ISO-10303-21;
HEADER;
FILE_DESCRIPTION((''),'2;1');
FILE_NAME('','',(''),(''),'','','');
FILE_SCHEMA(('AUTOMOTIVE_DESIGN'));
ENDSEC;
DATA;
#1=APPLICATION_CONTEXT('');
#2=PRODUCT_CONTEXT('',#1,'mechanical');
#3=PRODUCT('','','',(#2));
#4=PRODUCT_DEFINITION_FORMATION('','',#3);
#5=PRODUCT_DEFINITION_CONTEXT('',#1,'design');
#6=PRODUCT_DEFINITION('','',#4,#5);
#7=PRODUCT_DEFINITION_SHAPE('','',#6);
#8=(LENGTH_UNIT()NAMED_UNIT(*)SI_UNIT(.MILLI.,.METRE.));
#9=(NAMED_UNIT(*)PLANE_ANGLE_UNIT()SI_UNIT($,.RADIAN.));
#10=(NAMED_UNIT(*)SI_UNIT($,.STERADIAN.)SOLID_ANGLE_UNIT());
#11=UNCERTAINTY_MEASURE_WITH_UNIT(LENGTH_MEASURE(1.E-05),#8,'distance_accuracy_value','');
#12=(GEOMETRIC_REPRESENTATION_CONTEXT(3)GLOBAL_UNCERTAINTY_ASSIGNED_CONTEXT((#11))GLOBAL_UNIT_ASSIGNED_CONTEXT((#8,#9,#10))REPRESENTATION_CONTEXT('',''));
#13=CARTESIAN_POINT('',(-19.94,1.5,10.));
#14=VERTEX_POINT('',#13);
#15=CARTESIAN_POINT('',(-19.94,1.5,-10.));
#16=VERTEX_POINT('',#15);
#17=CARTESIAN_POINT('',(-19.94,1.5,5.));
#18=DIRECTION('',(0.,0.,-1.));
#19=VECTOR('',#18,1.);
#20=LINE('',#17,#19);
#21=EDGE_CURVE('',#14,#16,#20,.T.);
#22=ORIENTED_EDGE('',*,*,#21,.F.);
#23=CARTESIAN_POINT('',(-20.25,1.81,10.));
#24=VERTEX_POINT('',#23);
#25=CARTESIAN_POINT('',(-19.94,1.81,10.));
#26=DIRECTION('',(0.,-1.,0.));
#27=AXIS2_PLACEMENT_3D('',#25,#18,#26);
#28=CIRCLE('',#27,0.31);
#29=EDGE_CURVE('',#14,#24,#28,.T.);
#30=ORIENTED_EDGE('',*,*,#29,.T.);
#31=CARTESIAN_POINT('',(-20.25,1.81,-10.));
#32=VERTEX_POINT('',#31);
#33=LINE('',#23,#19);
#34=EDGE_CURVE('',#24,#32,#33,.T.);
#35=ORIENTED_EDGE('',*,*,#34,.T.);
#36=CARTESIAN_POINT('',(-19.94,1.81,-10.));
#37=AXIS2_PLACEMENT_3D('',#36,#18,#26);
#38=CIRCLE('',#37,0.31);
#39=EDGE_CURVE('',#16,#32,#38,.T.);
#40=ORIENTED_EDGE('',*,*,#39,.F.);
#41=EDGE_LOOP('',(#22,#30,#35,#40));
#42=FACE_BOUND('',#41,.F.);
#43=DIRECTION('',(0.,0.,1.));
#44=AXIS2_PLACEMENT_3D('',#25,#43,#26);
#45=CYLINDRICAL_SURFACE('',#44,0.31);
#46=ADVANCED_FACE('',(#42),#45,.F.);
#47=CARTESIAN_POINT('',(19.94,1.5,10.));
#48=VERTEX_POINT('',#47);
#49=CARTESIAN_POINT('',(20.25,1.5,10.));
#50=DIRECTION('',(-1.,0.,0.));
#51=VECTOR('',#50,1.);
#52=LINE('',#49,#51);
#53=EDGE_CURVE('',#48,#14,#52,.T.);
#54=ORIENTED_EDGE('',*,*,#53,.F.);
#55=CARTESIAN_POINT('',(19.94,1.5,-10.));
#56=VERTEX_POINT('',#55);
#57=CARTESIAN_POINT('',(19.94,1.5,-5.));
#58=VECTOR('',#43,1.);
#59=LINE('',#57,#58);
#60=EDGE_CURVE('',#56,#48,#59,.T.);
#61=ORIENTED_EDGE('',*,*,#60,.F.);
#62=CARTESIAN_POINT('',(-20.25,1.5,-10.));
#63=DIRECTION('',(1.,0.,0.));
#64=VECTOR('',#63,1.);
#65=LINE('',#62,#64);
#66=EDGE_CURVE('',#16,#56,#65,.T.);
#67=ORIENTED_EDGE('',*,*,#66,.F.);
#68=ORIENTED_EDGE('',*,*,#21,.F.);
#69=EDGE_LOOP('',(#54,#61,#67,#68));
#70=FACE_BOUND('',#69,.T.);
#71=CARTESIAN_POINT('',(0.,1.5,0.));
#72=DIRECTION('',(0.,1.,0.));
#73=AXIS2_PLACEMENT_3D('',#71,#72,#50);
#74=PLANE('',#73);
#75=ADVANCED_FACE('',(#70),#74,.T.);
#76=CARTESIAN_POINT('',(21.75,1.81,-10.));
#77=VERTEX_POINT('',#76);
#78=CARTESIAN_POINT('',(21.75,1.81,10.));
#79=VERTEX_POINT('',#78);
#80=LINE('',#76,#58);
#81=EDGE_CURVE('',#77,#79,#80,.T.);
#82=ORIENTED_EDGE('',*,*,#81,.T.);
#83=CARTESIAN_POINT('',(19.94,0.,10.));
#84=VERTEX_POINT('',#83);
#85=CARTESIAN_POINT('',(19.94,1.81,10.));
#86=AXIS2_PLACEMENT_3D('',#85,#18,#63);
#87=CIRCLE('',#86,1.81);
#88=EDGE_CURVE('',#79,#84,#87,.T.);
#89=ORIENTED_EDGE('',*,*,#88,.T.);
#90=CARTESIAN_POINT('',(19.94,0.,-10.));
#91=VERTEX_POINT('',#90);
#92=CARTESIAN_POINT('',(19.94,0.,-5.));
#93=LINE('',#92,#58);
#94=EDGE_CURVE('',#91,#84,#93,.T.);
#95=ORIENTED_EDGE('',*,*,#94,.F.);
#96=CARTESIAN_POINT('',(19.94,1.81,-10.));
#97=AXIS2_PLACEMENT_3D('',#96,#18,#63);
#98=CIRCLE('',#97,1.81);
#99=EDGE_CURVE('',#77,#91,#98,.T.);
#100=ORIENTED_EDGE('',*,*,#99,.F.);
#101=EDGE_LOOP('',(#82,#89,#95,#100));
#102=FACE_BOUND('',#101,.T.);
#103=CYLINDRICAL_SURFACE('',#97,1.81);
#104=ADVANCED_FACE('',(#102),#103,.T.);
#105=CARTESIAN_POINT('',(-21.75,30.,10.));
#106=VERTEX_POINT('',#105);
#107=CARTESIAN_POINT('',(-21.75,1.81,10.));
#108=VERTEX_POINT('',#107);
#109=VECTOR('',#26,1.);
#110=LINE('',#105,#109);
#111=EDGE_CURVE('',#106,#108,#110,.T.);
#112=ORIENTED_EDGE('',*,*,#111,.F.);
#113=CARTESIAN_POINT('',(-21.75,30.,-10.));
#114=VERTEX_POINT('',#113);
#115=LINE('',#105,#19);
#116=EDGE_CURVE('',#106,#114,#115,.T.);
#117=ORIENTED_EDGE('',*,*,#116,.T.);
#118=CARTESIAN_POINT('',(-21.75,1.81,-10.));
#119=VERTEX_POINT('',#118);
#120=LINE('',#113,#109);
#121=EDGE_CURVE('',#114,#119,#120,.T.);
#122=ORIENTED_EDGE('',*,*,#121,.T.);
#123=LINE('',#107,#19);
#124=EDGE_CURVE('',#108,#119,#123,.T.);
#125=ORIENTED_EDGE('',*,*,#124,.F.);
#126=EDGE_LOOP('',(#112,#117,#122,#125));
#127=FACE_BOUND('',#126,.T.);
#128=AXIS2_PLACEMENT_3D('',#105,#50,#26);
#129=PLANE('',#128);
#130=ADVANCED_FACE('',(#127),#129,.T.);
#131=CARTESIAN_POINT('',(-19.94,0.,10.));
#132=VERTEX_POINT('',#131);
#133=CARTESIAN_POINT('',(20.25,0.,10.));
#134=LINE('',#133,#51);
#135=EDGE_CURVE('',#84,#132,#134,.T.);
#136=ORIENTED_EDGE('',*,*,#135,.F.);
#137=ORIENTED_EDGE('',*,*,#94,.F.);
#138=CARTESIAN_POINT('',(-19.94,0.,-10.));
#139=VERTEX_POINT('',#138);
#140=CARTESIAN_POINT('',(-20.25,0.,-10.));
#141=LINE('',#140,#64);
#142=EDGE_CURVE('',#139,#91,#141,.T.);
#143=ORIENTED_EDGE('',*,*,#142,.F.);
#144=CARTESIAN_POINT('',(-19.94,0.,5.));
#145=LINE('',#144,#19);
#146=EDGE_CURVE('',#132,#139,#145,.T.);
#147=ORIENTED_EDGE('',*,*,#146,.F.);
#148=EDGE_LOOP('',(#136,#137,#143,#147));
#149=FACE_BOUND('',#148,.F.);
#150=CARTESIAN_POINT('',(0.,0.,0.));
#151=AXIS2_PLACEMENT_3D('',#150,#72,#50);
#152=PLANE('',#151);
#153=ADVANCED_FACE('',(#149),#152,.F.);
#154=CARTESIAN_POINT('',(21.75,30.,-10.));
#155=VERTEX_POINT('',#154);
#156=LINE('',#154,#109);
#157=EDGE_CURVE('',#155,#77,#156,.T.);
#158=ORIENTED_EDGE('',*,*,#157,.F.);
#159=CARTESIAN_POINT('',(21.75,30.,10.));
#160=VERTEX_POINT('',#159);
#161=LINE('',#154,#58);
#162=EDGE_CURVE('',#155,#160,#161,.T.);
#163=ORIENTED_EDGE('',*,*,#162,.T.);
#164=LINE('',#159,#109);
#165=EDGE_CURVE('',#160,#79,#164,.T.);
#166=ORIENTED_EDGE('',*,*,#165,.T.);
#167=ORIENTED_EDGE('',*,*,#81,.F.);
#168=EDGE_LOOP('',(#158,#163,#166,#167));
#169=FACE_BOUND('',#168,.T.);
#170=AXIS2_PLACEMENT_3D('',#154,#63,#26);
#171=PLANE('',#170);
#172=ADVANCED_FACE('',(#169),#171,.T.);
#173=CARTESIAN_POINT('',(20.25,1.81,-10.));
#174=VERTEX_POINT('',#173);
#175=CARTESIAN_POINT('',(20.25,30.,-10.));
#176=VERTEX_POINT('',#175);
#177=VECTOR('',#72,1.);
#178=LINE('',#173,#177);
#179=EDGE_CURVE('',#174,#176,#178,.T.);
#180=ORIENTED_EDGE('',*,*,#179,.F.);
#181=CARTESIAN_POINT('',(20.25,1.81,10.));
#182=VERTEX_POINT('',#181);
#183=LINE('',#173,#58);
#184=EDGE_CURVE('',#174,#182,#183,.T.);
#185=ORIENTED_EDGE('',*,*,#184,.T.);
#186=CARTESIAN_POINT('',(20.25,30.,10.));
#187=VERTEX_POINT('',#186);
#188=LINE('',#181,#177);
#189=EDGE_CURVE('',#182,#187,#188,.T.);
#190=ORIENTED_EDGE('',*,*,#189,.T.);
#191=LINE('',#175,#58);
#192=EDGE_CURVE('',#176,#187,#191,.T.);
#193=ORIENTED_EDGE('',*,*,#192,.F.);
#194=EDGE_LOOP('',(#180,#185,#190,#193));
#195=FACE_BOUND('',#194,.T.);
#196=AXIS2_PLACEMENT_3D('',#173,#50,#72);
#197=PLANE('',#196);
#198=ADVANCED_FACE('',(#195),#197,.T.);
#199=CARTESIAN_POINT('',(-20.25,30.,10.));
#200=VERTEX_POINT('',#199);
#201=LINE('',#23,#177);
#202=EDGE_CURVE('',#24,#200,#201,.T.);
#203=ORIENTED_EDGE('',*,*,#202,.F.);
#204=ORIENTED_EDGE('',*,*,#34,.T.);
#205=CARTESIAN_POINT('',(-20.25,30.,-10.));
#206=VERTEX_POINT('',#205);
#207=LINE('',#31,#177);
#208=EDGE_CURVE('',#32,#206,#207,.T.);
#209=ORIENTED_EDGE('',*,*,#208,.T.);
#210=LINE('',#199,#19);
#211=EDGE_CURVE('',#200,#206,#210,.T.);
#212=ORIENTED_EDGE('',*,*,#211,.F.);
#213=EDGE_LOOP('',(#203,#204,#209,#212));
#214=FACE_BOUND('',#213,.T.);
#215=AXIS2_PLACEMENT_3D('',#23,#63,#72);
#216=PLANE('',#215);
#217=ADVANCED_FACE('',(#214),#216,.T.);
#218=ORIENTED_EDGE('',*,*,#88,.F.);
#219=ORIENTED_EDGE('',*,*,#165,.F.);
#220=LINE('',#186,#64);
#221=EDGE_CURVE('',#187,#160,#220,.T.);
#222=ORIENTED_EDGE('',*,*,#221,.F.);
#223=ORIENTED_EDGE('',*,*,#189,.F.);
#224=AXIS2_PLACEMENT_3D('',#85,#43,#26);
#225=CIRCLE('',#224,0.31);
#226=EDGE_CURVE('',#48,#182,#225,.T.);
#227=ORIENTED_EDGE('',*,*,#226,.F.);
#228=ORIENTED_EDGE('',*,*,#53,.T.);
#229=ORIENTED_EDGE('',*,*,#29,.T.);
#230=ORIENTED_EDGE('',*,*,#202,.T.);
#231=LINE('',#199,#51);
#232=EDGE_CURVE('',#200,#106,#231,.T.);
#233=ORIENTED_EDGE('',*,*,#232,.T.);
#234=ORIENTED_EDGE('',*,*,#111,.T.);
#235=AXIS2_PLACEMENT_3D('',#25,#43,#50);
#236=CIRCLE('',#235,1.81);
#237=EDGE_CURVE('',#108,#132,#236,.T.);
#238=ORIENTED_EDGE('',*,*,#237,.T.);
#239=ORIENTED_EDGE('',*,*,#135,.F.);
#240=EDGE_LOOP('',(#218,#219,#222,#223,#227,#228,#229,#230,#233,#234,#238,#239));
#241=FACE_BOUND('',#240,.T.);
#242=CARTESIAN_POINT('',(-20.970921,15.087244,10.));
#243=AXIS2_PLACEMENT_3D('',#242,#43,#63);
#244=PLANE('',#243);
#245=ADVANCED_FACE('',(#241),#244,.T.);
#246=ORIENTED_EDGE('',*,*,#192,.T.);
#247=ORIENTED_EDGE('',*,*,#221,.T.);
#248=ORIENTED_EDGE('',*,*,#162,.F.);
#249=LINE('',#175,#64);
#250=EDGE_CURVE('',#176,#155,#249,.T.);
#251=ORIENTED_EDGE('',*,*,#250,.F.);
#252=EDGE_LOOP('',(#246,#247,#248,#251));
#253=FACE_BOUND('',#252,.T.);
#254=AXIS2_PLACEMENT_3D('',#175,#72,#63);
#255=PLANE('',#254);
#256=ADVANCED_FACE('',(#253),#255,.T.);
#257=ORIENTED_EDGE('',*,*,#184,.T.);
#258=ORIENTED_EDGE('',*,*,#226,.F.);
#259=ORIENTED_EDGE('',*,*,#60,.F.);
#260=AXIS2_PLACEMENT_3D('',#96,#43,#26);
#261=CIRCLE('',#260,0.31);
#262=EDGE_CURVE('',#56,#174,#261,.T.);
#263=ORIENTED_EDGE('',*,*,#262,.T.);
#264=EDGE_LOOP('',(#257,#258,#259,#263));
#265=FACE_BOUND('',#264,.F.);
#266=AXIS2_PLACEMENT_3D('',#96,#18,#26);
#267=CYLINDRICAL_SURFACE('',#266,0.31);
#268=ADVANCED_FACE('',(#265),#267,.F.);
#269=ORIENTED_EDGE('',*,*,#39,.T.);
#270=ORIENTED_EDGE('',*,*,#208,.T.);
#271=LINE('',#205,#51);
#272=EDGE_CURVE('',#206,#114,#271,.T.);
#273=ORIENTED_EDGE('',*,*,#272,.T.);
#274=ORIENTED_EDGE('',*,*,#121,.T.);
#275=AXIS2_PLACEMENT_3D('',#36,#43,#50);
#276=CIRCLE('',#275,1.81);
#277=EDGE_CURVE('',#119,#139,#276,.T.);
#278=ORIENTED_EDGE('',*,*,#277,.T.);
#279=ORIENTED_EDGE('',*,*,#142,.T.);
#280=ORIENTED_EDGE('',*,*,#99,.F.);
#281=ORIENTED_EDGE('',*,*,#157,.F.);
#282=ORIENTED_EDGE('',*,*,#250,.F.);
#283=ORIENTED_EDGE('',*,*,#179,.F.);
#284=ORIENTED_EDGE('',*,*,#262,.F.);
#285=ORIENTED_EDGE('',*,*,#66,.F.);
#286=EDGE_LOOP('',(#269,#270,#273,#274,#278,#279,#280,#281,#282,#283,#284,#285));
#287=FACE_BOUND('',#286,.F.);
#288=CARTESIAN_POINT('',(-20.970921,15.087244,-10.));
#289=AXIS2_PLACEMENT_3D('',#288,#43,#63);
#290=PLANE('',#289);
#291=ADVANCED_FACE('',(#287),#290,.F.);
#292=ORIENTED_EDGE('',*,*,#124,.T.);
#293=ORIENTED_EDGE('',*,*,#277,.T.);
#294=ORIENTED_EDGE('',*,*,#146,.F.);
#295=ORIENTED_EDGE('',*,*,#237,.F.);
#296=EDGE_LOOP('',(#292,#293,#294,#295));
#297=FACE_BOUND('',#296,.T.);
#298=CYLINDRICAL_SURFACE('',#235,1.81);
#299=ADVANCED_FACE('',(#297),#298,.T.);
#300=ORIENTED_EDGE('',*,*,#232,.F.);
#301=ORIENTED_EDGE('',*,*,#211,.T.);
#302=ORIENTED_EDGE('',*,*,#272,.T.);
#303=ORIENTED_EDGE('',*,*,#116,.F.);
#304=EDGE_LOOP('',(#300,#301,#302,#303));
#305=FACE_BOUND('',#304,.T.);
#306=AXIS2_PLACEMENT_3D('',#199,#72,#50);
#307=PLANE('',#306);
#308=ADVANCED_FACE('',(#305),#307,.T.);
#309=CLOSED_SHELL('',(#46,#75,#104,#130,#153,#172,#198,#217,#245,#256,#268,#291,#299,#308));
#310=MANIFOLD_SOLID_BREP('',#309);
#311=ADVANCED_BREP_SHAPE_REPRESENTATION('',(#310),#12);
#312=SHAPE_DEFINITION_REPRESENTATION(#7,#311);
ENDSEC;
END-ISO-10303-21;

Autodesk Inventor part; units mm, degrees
ref_plane "YZ Plane" through (0, 0, 0) normal (1, 0, 0) x (0, 1, 0)
ref_plane "XZ Plane" through (0, 0, 0) normal (0, 1, 0) x (-1, 0, 0)
ref_plane "XY Plane" through (0, 0, 0) normal (0, 0, 1) x (1, 0, 0)
sketch "Sketch1" plane through (0, 0, 0) normal (0, 1, 0) x (-1, 0, 0)
  line L0 (20.25, -10) -> (-20.25, -10)
  line L1 (-20.25, -10) -> (-20.25, 10)
  line L2 (-20.25, 10) -> (20.25, 10)
  line L3 (20.25, 10) -> (20.25, -10)
  point P0 (0, 0)
  dimension "d0" = 40.5
  dimension "d1" = 20
  dimension "d2" = 10
  dimension "d3" = 20.25
extrude "Plate1" add sketch "Sketch1" along normal blind 1.5
sketch "Sketch2" plane through (21.75, 0, -10) normal (-1, 0, 0) x (0, -1, 0)
  line L0 (0, 20) -> (0, 0)
  line L1 (0, 0) -> (-30, 0)
  line L2 (-30, 0) -> (-30, 20)
  line L3 (-30, 20) -> (0, 20)
edge flange "Flange1" height 30 angle 90 thickness 1.5 bend radius 0.31 thickness toward (-1, 0, 0) relief tear relief width 1.5 relief depth 0.75 edges at (20.25, 1.5, 0) wall of the first edge with corners at (21.75, 0, 10) (21.75, 0, -10) (21.75, 30, -10) (21.75, 30, 10)
bend "Bend1"
corner "Corner1"
sketch "Sketch3" plane through (-21.75, 0, 10) normal (1, 0, 0) x (0, 1, 0)
  line L0 (0, -20) -> (0, 0)
  line L1 (0, 0) -> (30, 0)
  line L2 (30, 0) -> (30, -20)
  line L3 (30, -20) -> (0, -20)
edge flange "Flange2" height 30 angle 90 thickness 1.5 bend radius 0.31 thickness toward (1, 0, 0) relief tear relief width 1.5 relief depth 0.75 edges at (-20.25, 1.5, 0) wall of the first edge with corners at (-21.75, 0, -10) (-21.75, 0, 10) (-21.75, 30, 10) (-21.75, 30, -10)
bend "Bend2"
corner "Corner2"
equation "\"d4\" = Thickness"
equation "\"d5\" = BendReliefWidth"
equation "\"d6\" = BendReliefDepth"
equation "\"d7\" = MinimumRemnant"
equation "\"d8\" = TransitionRadius"
equation "\"d11\" = BendRadius"
equation "\"d12\" = CornerReliefSize"
equation "\"d13\" = GapSize"
equation "\"d14\" = JacobiRadiusSize"
equation "\"d15\" = BendReliefWidth"
equation "\"d16\" = BendReliefDepth"
equation "\"d17\" = MinimumRemnant"
equation "\"d18\" = TransitionRadius"
equation "\"d21\" = BendRadius"
equation "\"d22\" = CornerReliefSize"
equation "\"d23\" = GapSize"
equation "\"d24\" = JacobiRadiusSize"
equation "\"BendReliefWidth\" = Thickness"
equation "\"BendReliefDepth\" = 0.5 * Thickness"
equation "\"CornerReliefSize\" = 4 * Thickness"
equation "\"MinimumRemnant\" = 2 * Thickness"
equation "\"TransitionRadius\" = BendRadius"
equation "\"JacobiRadiusSize\" = BendRadius"
equation "\"GapSize\" = Thickness"
equation "\"Thickness\" = 1.5"
equation "\"BendRadius\" = 0.31"
properties part number "axis_10_top_frame" material "Aluminum 6061-AHC"
